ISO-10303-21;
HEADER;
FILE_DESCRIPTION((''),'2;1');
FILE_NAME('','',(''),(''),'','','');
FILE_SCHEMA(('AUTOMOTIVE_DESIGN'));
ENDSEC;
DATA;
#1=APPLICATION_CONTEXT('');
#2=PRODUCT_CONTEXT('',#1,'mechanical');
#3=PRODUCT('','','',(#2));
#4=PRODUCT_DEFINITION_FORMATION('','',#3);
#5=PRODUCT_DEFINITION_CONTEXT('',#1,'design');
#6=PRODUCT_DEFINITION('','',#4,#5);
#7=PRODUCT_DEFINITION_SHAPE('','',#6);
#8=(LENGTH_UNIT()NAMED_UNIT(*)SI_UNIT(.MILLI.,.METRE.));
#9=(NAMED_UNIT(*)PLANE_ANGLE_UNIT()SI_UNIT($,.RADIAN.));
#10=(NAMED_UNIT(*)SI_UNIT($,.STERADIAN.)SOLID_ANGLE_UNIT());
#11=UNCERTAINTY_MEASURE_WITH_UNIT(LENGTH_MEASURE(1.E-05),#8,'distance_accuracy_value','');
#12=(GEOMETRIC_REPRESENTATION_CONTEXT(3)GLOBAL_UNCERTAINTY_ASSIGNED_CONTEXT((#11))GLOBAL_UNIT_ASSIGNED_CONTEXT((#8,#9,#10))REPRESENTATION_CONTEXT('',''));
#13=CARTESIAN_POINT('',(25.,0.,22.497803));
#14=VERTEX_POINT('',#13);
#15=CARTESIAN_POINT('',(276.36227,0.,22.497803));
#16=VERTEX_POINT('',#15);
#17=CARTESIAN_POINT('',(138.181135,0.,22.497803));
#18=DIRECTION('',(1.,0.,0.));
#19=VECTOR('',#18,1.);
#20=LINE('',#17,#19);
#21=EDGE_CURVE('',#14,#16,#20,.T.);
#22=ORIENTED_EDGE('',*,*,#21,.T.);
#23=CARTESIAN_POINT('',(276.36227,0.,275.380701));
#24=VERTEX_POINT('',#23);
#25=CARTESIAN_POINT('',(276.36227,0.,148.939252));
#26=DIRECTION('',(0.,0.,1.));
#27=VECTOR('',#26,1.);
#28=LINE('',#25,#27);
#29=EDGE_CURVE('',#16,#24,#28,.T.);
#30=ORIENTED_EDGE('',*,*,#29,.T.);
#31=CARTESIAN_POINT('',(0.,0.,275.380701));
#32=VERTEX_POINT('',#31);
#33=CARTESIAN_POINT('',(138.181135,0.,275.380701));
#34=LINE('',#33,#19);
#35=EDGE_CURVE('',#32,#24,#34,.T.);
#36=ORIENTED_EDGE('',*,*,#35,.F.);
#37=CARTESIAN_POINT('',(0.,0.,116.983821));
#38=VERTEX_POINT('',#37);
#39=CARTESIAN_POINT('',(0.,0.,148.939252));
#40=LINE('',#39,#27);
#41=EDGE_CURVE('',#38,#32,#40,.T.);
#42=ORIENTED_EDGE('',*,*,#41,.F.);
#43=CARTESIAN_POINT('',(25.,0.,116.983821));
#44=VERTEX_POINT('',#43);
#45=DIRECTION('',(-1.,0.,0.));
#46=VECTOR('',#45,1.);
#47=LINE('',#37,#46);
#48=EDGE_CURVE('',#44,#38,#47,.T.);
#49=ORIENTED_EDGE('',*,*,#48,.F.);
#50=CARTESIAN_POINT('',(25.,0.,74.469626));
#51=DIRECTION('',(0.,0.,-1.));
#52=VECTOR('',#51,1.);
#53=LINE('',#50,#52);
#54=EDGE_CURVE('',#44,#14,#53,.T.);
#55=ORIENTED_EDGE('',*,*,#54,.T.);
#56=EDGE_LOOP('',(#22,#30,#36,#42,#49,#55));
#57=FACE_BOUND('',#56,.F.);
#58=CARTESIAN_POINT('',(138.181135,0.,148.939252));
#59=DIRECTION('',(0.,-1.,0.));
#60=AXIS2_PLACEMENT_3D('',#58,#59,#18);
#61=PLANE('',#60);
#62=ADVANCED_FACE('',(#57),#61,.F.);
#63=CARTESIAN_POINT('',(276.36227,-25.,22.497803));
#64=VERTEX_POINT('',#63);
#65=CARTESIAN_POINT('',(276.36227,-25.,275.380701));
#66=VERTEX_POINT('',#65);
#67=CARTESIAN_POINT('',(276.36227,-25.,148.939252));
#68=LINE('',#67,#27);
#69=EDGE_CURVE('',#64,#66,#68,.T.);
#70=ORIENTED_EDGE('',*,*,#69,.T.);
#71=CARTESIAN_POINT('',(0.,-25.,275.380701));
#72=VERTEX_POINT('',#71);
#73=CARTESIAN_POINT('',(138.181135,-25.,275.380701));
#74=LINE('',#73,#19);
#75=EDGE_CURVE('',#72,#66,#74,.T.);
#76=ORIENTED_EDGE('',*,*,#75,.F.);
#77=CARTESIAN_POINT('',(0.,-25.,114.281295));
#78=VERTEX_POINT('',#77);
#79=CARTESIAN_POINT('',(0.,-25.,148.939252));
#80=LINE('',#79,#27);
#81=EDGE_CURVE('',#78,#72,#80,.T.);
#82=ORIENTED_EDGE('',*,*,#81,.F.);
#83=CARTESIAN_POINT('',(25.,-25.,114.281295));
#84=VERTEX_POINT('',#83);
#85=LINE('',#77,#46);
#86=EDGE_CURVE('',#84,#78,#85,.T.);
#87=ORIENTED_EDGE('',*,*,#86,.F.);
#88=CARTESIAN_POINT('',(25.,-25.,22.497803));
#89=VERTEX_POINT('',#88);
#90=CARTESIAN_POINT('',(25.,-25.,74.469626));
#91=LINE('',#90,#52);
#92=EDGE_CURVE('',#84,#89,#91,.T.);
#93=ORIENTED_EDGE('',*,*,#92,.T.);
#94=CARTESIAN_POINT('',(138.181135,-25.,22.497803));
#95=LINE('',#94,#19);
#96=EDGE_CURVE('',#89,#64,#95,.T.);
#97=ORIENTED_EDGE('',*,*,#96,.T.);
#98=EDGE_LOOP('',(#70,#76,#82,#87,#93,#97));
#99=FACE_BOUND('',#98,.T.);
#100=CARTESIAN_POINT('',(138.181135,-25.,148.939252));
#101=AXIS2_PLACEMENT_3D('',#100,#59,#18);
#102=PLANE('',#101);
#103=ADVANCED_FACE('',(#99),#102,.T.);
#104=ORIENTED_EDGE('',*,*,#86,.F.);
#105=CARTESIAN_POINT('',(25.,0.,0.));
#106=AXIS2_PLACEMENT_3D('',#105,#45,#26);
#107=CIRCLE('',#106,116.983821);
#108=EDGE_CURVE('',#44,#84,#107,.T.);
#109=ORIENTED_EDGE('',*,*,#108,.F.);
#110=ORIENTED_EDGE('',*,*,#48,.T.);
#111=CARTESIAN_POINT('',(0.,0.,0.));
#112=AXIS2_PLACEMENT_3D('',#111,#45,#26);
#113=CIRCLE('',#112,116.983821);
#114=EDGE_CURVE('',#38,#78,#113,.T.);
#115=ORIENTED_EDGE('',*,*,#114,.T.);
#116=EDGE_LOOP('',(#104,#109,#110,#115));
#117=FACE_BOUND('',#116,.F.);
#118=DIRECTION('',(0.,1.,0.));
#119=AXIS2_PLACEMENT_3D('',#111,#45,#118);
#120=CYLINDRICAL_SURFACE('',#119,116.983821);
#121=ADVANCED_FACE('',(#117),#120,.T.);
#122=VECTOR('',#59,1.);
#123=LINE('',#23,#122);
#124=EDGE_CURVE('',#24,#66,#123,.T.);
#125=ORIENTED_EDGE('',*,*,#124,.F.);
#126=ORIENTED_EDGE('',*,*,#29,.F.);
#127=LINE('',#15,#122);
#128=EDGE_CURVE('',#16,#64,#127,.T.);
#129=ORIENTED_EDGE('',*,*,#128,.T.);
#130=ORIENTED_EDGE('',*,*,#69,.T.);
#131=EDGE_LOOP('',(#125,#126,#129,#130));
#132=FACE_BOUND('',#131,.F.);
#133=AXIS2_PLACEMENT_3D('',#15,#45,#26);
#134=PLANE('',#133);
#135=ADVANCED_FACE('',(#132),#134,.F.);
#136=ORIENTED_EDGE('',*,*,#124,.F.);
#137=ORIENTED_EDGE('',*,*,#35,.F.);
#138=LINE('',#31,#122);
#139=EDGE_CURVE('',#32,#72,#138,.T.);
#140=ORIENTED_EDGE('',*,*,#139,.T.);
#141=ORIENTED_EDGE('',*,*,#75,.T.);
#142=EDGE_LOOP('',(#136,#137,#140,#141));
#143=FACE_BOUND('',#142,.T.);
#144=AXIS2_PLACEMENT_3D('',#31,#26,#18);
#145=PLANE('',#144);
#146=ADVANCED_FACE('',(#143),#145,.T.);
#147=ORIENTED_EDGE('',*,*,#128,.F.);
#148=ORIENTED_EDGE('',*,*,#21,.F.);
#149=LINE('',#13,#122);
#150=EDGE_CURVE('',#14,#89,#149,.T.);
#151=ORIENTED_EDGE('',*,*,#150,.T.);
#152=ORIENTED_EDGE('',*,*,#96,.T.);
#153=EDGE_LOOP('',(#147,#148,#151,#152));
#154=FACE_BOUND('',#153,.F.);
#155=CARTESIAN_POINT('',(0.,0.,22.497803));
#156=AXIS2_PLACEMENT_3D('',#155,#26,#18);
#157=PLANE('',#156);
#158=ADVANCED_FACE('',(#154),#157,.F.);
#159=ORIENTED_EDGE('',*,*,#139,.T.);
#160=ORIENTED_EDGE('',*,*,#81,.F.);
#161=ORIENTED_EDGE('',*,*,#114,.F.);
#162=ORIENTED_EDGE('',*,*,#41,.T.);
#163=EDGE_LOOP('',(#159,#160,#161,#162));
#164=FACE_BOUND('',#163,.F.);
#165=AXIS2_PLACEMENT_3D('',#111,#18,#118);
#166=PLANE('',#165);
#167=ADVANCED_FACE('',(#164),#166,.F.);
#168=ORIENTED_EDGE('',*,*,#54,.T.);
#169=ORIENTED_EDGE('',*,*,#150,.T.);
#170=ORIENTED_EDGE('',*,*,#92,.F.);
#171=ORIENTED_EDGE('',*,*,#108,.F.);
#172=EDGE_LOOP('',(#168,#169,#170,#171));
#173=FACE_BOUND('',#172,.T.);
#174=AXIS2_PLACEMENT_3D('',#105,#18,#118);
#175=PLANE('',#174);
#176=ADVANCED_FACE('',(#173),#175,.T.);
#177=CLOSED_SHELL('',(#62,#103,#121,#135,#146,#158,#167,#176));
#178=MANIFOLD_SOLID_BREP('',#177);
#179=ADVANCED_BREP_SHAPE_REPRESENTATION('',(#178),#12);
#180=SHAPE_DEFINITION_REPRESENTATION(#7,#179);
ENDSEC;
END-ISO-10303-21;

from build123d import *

# Parameters (mm, degrees)
F2_R     = 116.9838211005
F3_DEPTH = 25
F4_W     = 276.3622701168
F4_H     = 252.8828978539
F5_DEPTH = 25


# Not quite as in the source:
# - the program builds the solid bodies; features that only make, move or delete a surface that nothing else refers to are left out


with BuildPart() as f3:
    # F2 (on Right) → F3 (new body)
    with BuildSketch(Plane.YZ):
        Circle(F2_R)
    extrude(amount=F3_DEPTH)

    # F4 (on Front) → F5 (join)
    with BuildSketch(Plane.XZ):
        with Locations((138.1811350584, 148.9392518997)):
            Rectangle(F4_W, F4_H)
    extrude(amount=F5_DEPTH)


solid = f3.part
